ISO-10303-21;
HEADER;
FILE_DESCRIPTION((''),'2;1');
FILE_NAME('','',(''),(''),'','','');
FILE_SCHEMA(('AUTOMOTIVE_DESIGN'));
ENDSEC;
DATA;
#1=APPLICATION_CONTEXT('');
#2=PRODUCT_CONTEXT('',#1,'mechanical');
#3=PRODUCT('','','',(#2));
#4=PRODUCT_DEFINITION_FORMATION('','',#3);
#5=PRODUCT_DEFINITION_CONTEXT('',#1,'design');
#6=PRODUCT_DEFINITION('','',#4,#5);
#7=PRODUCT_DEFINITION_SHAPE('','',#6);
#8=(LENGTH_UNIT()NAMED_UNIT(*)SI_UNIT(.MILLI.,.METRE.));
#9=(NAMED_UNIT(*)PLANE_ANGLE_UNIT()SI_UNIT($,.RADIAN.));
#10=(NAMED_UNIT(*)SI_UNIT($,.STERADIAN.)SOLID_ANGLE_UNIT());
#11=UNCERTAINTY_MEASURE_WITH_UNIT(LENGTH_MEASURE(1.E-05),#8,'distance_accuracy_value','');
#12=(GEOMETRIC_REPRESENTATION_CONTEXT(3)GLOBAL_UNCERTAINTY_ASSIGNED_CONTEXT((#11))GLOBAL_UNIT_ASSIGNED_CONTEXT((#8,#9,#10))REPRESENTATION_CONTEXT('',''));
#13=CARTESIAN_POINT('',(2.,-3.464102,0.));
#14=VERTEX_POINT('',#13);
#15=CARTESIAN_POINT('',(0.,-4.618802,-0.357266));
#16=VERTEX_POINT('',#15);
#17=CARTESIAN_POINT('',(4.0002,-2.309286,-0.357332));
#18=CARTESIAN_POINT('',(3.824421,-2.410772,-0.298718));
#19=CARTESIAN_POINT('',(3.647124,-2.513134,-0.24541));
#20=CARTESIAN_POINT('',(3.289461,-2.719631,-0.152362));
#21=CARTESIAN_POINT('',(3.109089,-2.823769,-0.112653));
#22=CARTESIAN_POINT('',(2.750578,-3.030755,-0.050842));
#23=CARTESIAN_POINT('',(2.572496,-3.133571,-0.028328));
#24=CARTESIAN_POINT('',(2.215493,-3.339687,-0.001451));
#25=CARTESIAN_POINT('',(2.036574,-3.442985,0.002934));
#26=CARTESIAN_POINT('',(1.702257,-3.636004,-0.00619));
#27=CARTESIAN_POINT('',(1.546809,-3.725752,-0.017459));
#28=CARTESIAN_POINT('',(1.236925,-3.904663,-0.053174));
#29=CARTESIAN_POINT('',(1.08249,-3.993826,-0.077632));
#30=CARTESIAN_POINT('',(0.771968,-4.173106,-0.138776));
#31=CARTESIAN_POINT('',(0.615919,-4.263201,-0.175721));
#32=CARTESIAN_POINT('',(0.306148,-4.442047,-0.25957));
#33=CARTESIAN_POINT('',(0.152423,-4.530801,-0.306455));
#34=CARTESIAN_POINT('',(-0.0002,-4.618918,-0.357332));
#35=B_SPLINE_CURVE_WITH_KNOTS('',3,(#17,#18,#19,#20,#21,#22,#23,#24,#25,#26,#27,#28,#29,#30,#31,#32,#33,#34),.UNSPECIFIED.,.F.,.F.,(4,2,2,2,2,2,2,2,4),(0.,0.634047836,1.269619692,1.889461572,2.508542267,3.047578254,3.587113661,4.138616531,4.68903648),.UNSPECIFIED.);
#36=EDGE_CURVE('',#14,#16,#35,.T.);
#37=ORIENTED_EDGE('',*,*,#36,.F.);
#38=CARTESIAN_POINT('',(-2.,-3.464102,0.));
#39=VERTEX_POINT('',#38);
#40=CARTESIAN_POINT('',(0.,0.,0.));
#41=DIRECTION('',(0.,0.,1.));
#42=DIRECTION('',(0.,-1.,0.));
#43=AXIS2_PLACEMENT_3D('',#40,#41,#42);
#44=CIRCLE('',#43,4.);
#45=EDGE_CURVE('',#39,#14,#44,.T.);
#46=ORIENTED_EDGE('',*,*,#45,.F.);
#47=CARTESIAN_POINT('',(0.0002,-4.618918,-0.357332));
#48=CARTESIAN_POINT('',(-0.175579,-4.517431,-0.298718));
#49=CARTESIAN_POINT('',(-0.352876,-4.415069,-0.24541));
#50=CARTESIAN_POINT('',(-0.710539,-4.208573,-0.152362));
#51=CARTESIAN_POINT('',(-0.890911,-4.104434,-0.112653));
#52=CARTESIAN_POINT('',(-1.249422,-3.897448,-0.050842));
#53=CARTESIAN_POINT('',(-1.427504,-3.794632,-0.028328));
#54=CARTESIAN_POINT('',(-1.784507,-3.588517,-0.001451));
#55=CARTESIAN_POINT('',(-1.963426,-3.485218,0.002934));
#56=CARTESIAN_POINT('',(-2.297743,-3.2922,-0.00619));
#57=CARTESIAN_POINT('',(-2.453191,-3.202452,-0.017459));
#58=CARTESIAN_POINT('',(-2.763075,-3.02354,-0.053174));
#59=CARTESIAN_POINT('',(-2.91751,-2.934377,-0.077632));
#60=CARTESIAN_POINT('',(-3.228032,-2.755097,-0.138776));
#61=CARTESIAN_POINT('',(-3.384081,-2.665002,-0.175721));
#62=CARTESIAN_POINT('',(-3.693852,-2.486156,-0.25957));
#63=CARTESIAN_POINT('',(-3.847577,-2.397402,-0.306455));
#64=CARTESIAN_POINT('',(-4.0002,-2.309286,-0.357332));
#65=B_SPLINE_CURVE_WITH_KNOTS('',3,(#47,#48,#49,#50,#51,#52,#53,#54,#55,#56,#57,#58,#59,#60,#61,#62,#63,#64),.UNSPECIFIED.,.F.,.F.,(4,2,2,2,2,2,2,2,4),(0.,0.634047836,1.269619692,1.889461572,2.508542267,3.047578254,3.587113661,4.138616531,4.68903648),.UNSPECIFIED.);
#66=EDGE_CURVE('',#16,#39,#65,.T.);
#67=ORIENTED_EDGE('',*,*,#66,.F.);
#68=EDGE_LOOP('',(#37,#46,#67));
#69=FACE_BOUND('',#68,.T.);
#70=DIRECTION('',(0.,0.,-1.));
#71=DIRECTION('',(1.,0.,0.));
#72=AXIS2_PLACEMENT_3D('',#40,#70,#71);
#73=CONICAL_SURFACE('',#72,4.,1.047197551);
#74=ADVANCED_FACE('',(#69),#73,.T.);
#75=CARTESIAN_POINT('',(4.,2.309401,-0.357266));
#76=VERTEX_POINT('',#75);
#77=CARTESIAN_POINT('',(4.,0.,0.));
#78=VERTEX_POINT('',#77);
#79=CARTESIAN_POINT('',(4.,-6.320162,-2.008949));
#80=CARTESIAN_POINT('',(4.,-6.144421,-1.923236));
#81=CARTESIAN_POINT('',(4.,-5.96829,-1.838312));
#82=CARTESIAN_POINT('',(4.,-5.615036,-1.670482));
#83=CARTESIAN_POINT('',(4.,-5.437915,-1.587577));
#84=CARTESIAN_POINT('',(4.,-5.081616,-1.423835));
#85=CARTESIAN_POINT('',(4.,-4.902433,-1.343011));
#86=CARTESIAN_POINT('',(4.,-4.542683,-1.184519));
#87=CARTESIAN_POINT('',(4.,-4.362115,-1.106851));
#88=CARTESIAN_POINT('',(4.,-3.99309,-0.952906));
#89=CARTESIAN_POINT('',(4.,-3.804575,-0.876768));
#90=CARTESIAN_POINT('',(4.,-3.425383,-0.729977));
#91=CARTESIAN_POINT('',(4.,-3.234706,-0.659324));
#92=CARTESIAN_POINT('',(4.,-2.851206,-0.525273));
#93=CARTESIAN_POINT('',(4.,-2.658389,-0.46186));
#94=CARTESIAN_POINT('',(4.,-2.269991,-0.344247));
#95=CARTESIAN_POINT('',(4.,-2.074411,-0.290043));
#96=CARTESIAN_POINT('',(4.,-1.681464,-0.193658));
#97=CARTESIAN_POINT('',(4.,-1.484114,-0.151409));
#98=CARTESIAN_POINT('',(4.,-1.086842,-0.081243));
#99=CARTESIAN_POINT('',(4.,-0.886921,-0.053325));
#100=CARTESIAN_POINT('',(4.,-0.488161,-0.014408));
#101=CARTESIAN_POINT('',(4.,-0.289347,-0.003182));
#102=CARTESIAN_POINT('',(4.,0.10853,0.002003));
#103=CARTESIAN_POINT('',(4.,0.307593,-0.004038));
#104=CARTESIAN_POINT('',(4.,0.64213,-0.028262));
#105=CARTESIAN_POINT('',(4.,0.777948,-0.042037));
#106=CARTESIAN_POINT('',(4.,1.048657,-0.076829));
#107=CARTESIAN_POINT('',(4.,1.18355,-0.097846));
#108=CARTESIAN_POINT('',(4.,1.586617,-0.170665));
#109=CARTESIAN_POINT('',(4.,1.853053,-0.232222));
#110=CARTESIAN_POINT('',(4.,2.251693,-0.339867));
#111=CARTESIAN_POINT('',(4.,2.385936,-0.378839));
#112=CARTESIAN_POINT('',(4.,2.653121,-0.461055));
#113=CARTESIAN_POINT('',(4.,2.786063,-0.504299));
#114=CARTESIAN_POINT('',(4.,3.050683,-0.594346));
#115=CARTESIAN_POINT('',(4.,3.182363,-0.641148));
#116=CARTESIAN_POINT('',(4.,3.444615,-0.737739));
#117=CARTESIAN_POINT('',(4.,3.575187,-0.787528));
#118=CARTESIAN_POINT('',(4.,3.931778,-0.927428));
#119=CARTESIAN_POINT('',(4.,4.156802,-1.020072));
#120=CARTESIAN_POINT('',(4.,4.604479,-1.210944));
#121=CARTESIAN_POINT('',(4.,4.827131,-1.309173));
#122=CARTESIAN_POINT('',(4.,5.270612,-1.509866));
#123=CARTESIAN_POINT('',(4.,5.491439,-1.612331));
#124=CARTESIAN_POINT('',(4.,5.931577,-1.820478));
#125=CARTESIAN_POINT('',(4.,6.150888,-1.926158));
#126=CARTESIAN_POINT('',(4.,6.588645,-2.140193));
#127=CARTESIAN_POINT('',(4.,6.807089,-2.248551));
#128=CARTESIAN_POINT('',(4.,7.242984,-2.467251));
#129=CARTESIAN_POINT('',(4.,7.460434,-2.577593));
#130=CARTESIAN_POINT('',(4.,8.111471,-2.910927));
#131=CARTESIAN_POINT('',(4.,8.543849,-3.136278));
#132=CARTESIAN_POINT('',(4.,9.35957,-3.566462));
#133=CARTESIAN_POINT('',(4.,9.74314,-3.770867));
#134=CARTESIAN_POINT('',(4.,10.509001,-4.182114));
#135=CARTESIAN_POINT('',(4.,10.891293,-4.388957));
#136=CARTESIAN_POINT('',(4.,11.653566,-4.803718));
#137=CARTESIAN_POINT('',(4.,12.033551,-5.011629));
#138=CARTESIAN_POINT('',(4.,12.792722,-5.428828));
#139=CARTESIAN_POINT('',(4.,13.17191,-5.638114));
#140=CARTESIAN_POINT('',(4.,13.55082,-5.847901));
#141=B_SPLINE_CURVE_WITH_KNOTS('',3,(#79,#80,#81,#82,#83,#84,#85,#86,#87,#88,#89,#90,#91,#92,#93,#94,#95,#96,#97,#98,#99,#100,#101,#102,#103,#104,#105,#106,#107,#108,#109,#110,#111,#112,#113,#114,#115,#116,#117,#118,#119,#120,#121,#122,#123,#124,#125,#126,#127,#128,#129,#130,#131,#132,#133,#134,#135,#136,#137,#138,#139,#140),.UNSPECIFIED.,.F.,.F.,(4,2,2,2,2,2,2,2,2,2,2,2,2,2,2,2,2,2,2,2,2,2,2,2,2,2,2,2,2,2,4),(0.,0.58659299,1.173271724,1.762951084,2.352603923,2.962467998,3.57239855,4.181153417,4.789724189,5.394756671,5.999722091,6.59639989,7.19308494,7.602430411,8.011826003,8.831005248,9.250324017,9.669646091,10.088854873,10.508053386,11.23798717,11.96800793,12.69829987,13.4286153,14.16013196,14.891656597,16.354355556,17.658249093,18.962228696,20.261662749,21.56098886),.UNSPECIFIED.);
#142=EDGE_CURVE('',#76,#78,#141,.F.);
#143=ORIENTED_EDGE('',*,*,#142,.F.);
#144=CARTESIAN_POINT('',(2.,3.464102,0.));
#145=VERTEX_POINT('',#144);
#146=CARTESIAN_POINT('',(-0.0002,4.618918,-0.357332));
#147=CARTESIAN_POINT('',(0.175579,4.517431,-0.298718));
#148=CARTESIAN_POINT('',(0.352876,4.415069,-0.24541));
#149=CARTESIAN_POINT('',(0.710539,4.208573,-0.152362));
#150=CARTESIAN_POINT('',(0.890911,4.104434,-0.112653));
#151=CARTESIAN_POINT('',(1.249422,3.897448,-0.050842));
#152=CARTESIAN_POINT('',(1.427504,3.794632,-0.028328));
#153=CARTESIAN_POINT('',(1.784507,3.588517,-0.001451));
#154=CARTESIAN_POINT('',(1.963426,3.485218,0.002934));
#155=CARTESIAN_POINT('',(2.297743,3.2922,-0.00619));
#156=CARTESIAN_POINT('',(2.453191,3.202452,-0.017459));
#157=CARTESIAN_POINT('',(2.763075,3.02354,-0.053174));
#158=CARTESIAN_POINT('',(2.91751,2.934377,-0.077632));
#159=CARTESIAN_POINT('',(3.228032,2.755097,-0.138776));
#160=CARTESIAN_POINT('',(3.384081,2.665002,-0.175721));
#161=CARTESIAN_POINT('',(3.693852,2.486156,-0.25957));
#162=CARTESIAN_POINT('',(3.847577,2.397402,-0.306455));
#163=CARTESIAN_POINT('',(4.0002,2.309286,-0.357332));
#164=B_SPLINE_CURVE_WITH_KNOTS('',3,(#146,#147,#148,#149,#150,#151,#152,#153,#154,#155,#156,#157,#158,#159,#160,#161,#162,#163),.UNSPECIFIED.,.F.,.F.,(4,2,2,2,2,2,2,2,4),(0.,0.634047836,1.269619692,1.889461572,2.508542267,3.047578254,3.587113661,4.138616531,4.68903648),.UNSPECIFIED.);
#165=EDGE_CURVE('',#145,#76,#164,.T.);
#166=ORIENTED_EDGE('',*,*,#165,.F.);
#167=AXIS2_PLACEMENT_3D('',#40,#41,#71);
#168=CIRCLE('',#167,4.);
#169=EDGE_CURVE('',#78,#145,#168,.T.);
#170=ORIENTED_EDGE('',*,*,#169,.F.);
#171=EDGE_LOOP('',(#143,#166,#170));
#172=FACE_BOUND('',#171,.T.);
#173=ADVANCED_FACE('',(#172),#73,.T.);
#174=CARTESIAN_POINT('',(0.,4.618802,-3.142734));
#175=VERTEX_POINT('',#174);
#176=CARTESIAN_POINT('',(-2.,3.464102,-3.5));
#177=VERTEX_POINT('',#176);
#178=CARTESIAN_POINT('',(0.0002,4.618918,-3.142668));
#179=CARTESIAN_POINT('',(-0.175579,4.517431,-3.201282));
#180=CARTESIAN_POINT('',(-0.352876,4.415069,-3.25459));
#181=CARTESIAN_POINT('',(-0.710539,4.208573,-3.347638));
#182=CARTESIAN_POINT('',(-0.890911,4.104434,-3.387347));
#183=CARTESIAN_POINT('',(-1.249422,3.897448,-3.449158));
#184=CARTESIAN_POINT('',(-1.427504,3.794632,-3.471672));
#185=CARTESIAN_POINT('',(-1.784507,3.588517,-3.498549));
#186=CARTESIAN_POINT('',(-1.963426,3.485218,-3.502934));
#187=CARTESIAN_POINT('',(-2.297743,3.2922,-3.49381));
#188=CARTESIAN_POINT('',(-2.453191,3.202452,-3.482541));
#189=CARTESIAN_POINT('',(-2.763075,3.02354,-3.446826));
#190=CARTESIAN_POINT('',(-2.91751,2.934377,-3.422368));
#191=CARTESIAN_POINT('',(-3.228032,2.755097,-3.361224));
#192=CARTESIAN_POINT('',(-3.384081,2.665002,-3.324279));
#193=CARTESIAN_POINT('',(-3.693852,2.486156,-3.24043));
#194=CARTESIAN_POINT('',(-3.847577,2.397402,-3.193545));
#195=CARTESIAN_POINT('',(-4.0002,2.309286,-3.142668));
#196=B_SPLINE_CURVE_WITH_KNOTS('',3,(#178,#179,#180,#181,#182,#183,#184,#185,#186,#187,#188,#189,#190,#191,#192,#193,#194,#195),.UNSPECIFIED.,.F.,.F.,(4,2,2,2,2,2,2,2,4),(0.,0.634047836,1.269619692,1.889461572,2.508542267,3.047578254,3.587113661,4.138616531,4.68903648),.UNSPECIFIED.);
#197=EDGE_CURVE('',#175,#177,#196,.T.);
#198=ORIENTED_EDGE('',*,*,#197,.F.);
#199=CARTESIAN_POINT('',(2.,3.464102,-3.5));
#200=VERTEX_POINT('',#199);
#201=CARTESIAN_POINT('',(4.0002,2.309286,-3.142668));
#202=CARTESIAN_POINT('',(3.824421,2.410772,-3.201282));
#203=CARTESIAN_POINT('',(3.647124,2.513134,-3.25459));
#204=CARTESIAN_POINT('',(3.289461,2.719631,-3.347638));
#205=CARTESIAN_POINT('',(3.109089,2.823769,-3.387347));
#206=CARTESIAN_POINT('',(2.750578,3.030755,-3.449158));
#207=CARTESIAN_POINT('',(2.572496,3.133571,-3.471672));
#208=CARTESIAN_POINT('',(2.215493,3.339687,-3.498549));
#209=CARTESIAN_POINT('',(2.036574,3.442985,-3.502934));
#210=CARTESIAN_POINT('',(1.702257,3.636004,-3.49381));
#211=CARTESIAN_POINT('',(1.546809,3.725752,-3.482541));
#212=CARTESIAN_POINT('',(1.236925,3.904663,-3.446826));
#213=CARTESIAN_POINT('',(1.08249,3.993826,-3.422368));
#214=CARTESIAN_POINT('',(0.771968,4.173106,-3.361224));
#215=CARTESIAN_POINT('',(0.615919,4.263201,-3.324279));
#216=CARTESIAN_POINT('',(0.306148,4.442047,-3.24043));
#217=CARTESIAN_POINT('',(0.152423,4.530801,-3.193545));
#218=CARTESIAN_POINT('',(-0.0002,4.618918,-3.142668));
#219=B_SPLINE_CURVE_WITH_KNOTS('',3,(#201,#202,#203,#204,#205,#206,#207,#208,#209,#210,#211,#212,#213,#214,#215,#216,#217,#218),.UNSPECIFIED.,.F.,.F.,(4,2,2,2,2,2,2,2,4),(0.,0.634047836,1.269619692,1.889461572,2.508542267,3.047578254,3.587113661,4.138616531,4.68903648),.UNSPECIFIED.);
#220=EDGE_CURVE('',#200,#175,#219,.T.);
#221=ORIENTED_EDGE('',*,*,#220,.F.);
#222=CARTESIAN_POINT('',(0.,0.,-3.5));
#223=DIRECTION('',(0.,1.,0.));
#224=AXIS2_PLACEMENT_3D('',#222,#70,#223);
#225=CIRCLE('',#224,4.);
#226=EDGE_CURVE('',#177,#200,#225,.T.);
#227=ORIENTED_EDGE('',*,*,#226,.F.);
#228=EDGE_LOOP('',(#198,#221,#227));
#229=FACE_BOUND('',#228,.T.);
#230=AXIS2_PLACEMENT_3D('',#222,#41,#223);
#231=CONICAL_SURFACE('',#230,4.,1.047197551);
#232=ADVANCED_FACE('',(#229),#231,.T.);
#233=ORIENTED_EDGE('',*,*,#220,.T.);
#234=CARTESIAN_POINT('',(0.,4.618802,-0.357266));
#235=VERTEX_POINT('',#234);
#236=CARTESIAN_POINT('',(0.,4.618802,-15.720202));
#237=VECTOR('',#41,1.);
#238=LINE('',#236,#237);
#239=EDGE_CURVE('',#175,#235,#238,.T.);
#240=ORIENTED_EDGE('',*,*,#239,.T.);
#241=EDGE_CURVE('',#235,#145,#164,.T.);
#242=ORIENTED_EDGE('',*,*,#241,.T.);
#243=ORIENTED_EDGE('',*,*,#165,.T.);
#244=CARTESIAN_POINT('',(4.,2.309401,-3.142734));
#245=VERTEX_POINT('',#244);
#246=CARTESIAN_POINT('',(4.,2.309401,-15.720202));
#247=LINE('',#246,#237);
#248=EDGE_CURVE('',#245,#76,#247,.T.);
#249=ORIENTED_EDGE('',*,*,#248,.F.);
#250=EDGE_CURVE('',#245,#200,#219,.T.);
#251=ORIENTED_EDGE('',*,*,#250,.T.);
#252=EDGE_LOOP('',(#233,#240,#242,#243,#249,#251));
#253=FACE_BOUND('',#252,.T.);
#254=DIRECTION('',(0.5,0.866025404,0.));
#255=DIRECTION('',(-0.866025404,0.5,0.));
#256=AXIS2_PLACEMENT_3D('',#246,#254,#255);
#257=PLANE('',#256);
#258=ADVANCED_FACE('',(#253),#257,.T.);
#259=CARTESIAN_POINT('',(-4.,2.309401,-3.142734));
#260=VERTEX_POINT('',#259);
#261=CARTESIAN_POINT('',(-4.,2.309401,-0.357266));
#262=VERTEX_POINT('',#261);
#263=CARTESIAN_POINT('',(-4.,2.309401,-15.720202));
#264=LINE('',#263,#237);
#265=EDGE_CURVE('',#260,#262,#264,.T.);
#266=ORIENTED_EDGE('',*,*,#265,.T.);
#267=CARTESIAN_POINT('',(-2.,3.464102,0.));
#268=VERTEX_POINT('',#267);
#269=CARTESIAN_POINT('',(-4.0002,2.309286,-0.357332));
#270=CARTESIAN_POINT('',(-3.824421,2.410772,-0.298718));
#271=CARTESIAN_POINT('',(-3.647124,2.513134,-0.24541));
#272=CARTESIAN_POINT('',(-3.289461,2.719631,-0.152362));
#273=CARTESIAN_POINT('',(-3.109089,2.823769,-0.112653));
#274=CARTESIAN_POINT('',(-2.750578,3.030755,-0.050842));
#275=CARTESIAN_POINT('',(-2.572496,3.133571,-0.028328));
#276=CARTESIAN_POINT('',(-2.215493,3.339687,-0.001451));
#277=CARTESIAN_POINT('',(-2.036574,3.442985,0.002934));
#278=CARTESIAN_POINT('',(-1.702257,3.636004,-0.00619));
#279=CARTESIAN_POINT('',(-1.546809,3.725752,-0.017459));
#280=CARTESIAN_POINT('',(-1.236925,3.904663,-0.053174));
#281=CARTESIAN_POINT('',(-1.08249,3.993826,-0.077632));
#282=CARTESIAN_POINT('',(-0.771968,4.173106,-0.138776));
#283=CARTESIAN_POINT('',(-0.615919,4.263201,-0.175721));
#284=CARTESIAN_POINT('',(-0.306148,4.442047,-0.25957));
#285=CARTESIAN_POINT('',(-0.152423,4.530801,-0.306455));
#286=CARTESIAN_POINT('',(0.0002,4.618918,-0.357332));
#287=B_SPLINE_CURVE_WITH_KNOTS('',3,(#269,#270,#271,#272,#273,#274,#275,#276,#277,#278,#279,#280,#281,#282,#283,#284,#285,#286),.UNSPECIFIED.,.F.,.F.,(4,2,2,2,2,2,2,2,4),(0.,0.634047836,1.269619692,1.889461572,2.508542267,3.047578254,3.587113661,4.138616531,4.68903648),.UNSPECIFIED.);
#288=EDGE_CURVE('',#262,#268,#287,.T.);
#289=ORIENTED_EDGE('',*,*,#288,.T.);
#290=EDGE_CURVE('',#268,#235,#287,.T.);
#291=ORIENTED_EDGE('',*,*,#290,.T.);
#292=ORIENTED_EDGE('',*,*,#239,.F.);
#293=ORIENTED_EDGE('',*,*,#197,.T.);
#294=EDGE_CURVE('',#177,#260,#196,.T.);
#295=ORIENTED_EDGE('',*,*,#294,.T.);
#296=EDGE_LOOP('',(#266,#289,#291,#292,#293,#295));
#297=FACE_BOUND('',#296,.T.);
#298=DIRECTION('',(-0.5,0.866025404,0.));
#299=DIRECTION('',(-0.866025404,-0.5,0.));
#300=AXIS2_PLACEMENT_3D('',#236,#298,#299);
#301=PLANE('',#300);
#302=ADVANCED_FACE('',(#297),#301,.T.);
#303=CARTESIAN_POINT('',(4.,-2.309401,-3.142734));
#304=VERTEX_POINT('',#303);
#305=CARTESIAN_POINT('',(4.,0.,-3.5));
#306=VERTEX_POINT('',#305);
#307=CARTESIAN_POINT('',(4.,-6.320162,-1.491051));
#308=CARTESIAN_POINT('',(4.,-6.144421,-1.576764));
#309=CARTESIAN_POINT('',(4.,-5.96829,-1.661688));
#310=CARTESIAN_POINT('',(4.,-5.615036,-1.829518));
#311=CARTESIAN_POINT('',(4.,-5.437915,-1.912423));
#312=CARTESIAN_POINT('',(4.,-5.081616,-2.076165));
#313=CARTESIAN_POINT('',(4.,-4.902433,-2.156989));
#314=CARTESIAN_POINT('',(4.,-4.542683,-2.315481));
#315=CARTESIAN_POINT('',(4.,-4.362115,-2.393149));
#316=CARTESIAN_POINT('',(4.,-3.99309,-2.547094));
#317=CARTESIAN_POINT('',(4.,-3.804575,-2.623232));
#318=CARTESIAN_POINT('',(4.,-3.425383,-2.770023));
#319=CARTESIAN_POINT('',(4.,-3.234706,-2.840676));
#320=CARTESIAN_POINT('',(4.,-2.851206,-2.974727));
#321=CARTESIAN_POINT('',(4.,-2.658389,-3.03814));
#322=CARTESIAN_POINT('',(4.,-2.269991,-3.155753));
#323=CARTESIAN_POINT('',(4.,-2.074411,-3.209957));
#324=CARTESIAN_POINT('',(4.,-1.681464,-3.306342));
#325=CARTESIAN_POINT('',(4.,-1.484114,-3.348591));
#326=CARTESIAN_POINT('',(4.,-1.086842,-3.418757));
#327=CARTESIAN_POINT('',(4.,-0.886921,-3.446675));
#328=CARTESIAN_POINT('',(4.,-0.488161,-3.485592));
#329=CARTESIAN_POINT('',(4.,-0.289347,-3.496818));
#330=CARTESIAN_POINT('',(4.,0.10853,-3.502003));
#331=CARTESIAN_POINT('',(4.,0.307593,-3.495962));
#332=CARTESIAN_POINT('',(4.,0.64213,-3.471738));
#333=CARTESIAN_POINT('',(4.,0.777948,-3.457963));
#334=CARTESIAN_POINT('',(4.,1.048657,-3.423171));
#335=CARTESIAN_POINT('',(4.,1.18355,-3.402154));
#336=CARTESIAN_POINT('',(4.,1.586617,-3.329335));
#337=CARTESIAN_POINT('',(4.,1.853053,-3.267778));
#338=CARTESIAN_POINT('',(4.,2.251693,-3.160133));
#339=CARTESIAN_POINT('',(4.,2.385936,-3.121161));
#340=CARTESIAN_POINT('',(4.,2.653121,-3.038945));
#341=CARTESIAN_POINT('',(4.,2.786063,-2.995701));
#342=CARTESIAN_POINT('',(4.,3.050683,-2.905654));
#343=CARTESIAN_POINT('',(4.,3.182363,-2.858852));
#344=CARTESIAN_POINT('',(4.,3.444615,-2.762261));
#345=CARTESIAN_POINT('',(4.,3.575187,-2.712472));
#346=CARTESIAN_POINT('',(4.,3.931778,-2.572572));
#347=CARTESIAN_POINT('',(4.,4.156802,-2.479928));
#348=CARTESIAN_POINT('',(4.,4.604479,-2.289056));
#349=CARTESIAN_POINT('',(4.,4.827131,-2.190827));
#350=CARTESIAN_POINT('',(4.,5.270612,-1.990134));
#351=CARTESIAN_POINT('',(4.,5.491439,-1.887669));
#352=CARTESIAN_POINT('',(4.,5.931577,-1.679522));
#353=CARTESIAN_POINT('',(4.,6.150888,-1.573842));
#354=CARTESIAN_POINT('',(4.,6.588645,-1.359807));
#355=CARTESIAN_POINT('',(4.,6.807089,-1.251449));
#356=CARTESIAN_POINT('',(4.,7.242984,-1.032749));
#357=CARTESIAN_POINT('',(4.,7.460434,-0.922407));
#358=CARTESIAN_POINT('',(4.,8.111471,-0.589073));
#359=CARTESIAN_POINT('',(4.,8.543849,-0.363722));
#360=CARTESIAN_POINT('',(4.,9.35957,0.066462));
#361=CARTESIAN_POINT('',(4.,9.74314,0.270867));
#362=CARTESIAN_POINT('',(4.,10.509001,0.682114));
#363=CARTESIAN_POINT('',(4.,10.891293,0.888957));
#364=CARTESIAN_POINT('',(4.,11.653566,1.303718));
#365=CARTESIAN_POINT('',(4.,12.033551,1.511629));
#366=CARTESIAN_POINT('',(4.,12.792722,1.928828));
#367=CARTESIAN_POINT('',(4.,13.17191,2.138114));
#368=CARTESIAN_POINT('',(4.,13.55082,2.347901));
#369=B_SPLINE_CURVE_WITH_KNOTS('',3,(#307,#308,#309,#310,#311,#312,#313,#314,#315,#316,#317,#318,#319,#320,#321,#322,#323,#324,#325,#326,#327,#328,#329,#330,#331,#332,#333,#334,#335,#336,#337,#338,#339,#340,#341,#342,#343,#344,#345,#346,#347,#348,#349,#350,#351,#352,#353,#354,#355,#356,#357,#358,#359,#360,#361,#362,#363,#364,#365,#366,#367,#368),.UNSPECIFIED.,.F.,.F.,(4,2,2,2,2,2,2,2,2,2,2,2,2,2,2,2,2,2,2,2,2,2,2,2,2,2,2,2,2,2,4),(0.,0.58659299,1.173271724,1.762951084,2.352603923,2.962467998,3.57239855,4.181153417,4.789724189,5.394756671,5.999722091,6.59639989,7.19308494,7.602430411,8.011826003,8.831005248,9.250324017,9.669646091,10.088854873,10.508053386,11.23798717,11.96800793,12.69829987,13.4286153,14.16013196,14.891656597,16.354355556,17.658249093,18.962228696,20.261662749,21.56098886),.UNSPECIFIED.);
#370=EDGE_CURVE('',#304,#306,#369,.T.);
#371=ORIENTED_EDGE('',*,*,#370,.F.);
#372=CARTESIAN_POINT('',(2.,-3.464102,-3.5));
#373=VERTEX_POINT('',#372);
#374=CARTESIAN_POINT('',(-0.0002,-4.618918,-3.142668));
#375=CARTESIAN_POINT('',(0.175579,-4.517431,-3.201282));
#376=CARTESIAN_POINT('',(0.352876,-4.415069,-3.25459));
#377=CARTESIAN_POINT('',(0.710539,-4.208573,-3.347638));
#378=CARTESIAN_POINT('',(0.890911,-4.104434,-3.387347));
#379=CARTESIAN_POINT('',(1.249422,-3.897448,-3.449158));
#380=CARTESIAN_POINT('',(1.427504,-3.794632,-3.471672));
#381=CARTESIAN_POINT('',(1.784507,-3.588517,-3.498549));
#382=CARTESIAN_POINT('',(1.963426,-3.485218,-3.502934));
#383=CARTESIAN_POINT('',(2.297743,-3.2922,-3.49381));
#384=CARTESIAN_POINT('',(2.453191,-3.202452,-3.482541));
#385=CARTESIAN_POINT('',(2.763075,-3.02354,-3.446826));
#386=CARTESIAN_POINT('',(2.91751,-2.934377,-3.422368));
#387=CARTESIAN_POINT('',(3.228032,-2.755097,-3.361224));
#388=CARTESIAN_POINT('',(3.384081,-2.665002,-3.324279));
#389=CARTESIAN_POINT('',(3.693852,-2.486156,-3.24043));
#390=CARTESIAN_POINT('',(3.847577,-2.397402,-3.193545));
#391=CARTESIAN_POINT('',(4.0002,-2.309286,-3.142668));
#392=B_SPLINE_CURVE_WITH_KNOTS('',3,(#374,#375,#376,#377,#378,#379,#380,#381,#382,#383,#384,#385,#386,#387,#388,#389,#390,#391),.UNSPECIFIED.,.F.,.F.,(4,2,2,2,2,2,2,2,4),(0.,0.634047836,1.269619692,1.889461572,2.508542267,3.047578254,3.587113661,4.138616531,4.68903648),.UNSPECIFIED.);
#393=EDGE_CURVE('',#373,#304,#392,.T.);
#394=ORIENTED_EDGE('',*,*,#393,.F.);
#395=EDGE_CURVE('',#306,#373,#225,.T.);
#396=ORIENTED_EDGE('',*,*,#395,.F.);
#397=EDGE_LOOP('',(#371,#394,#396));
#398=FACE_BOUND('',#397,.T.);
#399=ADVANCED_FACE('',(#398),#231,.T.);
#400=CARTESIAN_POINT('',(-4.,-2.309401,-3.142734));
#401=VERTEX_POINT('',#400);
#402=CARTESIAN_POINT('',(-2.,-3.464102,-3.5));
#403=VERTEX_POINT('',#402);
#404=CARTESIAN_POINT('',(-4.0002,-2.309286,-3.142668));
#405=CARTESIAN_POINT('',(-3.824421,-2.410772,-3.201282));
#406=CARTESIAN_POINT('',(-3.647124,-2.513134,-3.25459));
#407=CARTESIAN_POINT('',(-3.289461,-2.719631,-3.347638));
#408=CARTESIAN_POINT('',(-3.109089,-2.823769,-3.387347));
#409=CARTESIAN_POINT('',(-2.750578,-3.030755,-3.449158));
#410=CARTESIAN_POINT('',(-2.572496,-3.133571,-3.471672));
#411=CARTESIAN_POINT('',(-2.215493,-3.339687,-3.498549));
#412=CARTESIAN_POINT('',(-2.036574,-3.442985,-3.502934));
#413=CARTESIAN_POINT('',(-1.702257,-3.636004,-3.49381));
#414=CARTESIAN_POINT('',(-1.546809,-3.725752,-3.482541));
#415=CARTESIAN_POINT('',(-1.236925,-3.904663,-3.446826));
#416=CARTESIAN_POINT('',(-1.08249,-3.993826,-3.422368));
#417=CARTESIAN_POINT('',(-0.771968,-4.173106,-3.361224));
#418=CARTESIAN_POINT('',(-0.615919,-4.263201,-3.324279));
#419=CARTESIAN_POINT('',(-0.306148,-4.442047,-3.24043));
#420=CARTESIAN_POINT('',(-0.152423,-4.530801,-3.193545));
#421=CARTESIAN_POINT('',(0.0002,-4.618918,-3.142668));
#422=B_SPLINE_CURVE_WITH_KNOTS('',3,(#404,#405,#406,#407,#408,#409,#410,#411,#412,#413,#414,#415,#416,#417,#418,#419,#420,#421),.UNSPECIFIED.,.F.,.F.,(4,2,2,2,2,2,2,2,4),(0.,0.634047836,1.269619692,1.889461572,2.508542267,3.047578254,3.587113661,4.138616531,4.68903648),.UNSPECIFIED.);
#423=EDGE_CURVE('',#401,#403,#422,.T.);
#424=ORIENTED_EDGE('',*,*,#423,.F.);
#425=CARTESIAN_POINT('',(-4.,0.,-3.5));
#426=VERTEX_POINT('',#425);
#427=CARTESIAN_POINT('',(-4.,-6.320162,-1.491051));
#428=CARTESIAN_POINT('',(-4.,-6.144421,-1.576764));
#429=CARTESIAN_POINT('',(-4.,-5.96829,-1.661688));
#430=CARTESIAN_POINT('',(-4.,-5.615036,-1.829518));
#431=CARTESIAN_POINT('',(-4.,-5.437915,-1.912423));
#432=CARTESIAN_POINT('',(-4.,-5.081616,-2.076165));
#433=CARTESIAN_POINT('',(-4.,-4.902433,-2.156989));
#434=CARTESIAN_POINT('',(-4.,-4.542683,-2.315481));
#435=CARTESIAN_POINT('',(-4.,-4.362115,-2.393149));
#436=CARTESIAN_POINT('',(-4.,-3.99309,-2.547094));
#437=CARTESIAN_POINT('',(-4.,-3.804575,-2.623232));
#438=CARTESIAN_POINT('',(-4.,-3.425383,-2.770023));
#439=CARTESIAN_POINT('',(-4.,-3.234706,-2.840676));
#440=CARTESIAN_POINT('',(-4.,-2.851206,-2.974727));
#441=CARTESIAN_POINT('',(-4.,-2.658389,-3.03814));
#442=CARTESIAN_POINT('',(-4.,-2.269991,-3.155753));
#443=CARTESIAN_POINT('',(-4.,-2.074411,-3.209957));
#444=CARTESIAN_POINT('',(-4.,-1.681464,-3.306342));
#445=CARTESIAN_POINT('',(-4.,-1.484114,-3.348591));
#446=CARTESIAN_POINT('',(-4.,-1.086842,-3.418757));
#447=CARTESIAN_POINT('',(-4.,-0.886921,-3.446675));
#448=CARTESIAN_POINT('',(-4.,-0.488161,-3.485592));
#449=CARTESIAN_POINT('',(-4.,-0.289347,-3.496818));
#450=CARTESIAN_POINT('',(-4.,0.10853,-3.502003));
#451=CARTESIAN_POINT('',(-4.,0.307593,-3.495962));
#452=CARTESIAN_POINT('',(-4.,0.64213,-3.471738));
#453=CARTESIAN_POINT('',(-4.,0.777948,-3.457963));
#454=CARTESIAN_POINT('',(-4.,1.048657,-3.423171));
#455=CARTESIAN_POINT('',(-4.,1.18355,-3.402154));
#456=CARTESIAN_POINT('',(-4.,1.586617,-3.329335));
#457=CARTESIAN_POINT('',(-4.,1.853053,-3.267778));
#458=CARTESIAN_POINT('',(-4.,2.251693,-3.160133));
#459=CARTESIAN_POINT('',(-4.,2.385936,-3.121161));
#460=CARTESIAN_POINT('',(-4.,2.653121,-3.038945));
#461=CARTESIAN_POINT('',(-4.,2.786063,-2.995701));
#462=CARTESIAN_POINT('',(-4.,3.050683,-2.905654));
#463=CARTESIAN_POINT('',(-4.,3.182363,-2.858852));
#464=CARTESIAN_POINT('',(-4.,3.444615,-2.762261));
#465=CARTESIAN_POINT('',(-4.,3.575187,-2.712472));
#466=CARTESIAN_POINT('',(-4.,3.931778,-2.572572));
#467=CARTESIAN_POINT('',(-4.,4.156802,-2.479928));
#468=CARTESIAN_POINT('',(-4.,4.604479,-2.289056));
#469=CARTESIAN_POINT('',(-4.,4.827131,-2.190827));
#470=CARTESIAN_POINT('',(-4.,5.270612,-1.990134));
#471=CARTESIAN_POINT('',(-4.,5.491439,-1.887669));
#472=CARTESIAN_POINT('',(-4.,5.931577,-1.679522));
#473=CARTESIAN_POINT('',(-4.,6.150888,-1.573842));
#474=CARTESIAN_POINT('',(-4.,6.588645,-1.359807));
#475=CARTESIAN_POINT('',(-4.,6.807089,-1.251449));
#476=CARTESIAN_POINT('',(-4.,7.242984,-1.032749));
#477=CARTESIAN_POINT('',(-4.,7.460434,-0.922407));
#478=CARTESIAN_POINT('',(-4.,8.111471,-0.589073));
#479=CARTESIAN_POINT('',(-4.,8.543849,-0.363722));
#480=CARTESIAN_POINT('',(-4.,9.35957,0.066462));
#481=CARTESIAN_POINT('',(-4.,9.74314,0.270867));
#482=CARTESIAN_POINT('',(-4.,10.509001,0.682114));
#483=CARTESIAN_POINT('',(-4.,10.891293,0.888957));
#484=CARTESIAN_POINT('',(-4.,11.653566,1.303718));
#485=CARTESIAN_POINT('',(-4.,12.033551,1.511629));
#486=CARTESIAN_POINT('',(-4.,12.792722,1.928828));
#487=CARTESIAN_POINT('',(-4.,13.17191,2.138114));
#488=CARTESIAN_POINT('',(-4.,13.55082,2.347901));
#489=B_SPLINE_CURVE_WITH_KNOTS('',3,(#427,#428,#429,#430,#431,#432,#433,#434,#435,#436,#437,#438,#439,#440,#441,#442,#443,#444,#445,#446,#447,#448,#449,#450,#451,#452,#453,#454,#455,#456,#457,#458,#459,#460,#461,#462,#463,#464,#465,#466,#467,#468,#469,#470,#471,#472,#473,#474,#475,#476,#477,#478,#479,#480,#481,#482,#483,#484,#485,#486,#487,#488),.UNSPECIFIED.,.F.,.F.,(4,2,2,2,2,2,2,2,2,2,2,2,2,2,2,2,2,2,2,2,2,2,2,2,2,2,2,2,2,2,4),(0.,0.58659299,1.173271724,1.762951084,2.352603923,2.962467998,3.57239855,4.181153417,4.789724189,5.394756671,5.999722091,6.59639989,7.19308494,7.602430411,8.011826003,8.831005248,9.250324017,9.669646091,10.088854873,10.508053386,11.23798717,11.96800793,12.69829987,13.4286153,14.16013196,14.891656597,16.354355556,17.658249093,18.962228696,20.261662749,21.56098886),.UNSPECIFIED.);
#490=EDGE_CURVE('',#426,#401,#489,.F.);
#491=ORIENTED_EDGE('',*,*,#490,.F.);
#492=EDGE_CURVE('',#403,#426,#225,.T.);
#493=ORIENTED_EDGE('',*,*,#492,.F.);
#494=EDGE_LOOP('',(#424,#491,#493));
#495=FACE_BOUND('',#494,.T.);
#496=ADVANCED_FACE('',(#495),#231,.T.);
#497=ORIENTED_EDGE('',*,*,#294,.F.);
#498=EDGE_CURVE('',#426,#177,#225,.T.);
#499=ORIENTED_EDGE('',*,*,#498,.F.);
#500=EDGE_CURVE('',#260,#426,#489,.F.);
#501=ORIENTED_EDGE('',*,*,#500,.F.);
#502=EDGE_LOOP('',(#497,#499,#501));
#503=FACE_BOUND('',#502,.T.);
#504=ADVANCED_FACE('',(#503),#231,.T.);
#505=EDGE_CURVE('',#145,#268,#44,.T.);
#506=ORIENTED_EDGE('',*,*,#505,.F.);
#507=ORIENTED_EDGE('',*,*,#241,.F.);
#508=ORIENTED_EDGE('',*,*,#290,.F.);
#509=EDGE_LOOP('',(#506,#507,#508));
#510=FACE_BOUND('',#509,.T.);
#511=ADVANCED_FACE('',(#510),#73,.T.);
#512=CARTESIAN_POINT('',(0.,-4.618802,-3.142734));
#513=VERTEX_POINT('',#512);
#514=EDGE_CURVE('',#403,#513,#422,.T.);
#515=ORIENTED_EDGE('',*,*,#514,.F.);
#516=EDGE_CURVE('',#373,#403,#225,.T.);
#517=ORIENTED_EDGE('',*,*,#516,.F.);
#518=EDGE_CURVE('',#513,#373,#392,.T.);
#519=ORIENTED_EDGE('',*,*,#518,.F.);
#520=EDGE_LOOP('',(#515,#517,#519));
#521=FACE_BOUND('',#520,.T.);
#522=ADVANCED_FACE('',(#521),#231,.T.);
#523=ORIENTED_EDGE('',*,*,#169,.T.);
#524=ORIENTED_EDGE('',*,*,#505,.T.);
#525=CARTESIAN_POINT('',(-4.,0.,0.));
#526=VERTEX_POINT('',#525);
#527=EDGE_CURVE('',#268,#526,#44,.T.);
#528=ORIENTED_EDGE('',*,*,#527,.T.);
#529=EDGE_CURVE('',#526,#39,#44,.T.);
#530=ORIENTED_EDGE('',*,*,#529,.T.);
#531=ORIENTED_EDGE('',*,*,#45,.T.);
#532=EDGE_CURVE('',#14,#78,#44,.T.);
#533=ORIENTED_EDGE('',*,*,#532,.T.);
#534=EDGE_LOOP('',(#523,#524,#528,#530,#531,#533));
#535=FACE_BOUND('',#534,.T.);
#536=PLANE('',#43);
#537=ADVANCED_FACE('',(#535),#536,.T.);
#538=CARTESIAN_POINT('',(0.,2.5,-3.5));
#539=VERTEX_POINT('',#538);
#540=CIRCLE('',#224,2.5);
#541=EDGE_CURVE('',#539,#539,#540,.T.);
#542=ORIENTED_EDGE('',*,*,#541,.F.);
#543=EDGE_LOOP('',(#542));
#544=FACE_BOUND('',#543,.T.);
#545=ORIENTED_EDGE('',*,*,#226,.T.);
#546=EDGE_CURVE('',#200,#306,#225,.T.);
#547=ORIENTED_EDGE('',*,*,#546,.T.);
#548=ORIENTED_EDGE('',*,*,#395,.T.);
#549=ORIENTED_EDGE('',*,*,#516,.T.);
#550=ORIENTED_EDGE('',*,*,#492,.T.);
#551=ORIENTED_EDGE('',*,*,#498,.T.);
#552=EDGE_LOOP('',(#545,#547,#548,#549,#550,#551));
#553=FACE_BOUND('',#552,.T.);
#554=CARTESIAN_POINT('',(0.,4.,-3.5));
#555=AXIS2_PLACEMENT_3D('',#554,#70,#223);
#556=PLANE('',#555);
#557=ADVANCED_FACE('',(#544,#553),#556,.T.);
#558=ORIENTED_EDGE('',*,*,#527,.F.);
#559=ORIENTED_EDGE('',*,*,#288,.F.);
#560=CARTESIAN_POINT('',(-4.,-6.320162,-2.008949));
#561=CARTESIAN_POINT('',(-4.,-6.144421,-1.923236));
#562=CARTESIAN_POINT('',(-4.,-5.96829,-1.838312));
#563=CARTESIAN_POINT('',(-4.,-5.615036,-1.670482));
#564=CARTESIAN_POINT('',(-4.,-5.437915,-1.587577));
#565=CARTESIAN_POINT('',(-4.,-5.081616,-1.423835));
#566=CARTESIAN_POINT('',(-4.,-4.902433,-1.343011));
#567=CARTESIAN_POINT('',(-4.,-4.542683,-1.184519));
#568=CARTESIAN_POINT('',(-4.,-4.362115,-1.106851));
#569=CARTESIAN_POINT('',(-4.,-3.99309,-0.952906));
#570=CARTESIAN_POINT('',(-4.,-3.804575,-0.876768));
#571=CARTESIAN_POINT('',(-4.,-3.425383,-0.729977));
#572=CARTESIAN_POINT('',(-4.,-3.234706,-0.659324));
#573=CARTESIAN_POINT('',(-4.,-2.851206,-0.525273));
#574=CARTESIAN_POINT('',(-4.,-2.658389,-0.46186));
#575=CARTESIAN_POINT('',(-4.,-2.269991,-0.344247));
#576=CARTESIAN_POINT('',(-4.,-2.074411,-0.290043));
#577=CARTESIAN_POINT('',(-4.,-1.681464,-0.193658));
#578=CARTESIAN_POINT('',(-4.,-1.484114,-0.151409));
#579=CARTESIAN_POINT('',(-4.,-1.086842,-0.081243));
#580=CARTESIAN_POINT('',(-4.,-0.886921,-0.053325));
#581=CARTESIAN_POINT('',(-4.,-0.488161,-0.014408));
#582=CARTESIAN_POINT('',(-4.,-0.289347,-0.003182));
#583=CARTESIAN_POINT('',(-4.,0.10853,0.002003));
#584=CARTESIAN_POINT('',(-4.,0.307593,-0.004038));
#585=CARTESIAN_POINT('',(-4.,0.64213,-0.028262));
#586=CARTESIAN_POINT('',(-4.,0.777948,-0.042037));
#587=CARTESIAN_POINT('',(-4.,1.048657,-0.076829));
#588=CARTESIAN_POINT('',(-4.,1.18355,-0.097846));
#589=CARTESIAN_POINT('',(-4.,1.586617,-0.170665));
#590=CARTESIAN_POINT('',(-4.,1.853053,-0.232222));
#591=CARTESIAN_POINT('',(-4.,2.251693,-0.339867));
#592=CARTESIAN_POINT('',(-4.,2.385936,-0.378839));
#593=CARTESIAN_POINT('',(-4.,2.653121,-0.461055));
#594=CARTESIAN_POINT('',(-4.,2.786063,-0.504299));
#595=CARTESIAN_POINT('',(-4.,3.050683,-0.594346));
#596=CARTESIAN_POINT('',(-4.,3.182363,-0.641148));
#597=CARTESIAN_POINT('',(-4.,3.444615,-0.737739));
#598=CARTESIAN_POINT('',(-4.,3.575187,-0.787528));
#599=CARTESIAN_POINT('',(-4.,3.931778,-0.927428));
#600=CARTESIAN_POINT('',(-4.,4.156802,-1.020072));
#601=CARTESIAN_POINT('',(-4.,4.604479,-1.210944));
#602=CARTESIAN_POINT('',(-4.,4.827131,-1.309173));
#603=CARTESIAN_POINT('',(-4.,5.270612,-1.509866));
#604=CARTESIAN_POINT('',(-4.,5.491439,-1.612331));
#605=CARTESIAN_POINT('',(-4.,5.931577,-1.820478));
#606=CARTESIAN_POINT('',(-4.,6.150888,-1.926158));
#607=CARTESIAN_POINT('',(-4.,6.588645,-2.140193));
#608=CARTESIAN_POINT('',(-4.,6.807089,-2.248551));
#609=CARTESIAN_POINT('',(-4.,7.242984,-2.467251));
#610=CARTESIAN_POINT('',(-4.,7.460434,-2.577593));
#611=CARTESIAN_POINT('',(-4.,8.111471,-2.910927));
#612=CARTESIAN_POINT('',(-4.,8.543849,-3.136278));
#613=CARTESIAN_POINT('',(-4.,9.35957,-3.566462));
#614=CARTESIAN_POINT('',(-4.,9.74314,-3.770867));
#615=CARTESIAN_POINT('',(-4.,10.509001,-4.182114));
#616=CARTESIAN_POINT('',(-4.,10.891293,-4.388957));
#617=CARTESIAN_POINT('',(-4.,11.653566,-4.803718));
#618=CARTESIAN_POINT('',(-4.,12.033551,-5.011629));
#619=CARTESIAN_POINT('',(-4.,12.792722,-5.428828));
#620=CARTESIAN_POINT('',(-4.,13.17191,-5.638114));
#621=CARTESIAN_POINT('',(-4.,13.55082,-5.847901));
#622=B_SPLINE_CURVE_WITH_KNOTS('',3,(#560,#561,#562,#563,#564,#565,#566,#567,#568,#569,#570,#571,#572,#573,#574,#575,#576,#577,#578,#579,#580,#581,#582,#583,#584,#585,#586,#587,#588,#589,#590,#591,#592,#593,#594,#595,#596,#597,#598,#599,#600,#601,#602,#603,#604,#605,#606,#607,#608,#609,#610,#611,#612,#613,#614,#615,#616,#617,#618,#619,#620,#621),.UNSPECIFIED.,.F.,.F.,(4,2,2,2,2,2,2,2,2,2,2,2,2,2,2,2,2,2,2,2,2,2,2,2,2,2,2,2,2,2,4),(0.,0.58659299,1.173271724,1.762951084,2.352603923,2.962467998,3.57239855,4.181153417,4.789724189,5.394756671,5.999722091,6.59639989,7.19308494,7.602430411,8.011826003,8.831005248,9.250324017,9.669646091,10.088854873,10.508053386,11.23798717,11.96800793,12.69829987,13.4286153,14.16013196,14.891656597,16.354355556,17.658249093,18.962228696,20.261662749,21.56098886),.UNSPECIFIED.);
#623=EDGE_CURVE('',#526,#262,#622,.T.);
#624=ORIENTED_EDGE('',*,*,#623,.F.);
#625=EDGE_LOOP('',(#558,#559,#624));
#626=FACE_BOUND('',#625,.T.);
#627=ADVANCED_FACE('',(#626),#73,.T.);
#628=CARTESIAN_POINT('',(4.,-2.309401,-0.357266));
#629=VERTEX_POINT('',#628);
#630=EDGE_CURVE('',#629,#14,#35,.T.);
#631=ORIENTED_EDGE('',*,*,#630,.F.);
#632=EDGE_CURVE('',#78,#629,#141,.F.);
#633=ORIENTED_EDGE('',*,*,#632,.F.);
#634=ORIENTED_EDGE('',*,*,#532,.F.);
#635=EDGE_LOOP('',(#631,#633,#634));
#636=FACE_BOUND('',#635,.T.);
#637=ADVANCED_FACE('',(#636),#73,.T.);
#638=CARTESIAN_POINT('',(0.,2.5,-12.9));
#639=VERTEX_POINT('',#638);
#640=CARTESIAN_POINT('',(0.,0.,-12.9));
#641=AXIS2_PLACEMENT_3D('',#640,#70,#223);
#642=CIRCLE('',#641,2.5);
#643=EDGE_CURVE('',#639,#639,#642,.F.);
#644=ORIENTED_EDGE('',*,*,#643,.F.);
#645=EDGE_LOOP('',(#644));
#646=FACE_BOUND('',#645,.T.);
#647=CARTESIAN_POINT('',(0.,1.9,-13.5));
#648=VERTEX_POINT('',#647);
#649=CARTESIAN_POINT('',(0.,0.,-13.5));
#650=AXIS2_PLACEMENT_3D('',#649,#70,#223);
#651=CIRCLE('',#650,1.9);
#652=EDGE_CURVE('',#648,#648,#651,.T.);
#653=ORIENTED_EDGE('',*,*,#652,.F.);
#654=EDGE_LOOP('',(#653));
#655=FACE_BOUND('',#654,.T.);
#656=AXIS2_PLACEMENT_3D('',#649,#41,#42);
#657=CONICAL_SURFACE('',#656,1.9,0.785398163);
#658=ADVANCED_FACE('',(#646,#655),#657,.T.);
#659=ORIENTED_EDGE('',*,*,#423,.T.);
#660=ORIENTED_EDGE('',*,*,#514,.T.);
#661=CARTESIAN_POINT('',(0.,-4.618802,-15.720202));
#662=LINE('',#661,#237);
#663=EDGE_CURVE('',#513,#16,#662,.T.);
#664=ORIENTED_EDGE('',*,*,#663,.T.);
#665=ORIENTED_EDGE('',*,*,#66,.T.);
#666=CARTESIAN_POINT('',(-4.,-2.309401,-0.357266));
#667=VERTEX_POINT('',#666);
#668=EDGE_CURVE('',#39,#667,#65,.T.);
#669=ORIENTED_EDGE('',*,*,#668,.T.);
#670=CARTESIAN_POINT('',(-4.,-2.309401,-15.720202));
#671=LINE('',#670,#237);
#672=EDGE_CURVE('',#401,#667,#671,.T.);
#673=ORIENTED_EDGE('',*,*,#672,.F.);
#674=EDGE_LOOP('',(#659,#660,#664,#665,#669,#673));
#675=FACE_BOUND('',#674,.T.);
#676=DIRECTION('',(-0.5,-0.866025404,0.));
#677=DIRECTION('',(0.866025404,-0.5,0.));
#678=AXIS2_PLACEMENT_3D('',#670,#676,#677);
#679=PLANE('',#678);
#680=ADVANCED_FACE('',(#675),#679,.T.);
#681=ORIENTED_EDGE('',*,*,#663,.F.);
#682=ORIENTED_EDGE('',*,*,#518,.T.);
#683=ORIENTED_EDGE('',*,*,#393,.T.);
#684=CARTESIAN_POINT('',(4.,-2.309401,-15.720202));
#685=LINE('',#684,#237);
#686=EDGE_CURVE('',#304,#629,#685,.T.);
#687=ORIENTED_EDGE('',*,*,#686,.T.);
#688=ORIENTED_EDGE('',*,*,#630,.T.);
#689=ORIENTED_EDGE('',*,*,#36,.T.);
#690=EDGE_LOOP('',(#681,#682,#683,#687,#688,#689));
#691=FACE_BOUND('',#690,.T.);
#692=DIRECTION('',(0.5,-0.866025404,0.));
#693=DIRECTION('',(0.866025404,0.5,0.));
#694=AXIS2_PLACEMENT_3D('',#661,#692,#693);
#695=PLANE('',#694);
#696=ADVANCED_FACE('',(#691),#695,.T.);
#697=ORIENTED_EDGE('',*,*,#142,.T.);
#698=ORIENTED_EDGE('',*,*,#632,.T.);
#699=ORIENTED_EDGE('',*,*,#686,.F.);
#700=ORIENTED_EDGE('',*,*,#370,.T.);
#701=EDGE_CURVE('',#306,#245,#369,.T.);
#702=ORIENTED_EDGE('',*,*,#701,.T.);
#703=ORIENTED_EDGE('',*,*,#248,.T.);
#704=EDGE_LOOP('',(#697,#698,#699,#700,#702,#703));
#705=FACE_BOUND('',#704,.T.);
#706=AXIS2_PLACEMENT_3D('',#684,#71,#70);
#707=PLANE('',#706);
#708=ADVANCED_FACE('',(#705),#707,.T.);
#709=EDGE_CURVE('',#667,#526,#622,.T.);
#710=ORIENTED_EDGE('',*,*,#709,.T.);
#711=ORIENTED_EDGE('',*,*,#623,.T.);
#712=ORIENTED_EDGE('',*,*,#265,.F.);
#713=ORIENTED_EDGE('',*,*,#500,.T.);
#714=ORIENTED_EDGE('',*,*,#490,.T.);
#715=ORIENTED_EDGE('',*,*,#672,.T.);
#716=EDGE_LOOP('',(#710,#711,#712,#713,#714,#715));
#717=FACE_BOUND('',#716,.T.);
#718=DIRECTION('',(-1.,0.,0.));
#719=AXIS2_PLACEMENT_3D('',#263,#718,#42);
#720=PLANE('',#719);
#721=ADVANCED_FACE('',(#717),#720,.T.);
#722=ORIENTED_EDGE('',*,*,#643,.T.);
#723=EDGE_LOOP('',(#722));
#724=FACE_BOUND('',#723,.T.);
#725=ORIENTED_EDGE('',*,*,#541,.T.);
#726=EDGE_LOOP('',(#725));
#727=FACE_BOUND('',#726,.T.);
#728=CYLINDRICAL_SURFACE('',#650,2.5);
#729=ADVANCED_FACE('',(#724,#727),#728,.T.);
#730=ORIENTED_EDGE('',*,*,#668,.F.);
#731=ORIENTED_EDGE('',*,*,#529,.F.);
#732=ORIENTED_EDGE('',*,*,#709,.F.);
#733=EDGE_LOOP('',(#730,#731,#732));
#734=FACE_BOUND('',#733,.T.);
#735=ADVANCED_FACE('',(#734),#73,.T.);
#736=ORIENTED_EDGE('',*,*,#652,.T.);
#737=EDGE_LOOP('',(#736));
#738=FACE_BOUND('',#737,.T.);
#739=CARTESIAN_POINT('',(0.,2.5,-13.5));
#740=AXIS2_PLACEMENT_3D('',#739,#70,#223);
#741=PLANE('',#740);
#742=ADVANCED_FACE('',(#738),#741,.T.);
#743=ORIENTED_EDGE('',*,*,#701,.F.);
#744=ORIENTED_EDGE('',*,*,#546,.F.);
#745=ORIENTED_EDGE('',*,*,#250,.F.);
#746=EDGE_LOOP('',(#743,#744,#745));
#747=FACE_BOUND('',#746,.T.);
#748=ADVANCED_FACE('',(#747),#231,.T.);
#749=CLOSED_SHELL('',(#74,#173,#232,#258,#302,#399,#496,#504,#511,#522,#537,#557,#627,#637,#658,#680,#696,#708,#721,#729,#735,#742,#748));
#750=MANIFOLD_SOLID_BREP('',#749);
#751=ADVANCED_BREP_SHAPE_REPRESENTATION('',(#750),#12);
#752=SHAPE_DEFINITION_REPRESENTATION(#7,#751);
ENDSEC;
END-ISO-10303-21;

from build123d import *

# Parameters (mm, degrees)
BOSS_EXTRUDE1_DEPTH = 3.5
SKETCH16_OUTSIDE_W  = 57.702
SKETCH16_OUTSIDE_H  = 58.94
SKETCH16_OUTSIDE_R  = 4
CUT_EXTRUDE7_DEPTH  = 12.718930555
CUT_EXTRUDE7_DRAFT  = -60
CHAMFER1_SIZE       = 0.6


with BuildPart() as part:
    # Sketch1 → Revolve1 (revolve)
    with BuildSketch(Plane(origin=(0, 0, 0), x_dir=(0, 0, -1), z_dir=(1, 0, 0))):
        Polygon((3.5, 2.5), (13.5, 2.5), (13.5, 0), (0, 0), (0, 4), (3.5, 4), align=None)
    revolve(axis=Axis((0, 0, -13.5), (0, 0, 1)))

    # Sketch2 → Boss-Extrude1 (add)
    with BuildSketch(Plane.XY):
        Polygon((4, 2.309401077), (0, 4.618802154), (-4, 2.309401077), (-4, -2.309401077), (0, -4.618802154), (4, -2.309401077), align=None)
    extrude(amount=-BOSS_EXTRUDE1_DEPTH)

    # Cut-Extrude2: read off the stored shape, not the designer's step
    # Cut-Extrude2 outline → Cut-Extrude2 (revolve, cut)
    with BuildSketch(Plane.XZ):
        Polygon((4.618802154, 2.09e-07), (3.999999819, 2.09e-07), (4.618802154, -0.35726559), align=None)
    revolve(axis=Axis((0, 0, 0), (0, 0, 1)), mode=Mode.SUBTRACT)

    # Cut-Extrude2 2 outline → Cut-Extrude2 2 (revolve, cut)
    with BuildSketch(Plane.XZ):
        Polygon((4.618802154, 2.09e-07), (3.999999819, 2.09e-07), (4.618802154, -0.35726559), align=None)
    revolve(axis=Axis((0, 0, 0), (0, 0, 1)), mode=Mode.SUBTRACT)


with BuildPart() as cut_extrude7_tool:
    # Sketch16 outside → Cut-Extrude7 (with draft: the straight prism first)
    with BuildSketch(Plane(origin=(0, 0, -3.5), x_dir=(-1, 0, 0), z_dir=(0, 0, -1))):
        Rectangle(SKETCH16_OUTSIDE_W, SKETCH16_OUTSIDE_H)
        Circle(SKETCH16_OUTSIDE_R, mode=Mode.SUBTRACT)
    extrude(amount=-CUT_EXTRUDE7_DEPTH)
    # Cut-Extrude7: the draft: its side faces are tilted about the plane it starts from
    cut_extrude7_sides = [cut_extrude7_tool.faces().sort_by_distance(p)[0] for p in [
        (0, -29.47, 2.859465277),
        (-28.851, 0, 2.859465277),
        (0, 29.47, 2.859465277),
        (28.851, 0, 2.859465277),
        (4, 0, 2.859465277),
    ]]
    draft(cut_extrude7_sides, Plane(origin=(0, 0, -3.5), x_dir=(-1, 0, 0), z_dir=(0, 0, -1)), CUT_EXTRUDE7_DRAFT)


with BuildPart() as part_1:
    add(part.part)

    # Cut-Extrude7: cut by cut_extrude7_tool
    add(cut_extrude7_tool.part, mode=Mode.SUBTRACT)

    # Chamfer1
    chamfer1_edges = [part_1.edges().sort_by_distance(p)[0] for p in [
        (0, -2.5, -13.5),
    ]]
    chamfer(chamfer1_edges, length=CHAMFER1_SIZE)


solid = part_1.part
